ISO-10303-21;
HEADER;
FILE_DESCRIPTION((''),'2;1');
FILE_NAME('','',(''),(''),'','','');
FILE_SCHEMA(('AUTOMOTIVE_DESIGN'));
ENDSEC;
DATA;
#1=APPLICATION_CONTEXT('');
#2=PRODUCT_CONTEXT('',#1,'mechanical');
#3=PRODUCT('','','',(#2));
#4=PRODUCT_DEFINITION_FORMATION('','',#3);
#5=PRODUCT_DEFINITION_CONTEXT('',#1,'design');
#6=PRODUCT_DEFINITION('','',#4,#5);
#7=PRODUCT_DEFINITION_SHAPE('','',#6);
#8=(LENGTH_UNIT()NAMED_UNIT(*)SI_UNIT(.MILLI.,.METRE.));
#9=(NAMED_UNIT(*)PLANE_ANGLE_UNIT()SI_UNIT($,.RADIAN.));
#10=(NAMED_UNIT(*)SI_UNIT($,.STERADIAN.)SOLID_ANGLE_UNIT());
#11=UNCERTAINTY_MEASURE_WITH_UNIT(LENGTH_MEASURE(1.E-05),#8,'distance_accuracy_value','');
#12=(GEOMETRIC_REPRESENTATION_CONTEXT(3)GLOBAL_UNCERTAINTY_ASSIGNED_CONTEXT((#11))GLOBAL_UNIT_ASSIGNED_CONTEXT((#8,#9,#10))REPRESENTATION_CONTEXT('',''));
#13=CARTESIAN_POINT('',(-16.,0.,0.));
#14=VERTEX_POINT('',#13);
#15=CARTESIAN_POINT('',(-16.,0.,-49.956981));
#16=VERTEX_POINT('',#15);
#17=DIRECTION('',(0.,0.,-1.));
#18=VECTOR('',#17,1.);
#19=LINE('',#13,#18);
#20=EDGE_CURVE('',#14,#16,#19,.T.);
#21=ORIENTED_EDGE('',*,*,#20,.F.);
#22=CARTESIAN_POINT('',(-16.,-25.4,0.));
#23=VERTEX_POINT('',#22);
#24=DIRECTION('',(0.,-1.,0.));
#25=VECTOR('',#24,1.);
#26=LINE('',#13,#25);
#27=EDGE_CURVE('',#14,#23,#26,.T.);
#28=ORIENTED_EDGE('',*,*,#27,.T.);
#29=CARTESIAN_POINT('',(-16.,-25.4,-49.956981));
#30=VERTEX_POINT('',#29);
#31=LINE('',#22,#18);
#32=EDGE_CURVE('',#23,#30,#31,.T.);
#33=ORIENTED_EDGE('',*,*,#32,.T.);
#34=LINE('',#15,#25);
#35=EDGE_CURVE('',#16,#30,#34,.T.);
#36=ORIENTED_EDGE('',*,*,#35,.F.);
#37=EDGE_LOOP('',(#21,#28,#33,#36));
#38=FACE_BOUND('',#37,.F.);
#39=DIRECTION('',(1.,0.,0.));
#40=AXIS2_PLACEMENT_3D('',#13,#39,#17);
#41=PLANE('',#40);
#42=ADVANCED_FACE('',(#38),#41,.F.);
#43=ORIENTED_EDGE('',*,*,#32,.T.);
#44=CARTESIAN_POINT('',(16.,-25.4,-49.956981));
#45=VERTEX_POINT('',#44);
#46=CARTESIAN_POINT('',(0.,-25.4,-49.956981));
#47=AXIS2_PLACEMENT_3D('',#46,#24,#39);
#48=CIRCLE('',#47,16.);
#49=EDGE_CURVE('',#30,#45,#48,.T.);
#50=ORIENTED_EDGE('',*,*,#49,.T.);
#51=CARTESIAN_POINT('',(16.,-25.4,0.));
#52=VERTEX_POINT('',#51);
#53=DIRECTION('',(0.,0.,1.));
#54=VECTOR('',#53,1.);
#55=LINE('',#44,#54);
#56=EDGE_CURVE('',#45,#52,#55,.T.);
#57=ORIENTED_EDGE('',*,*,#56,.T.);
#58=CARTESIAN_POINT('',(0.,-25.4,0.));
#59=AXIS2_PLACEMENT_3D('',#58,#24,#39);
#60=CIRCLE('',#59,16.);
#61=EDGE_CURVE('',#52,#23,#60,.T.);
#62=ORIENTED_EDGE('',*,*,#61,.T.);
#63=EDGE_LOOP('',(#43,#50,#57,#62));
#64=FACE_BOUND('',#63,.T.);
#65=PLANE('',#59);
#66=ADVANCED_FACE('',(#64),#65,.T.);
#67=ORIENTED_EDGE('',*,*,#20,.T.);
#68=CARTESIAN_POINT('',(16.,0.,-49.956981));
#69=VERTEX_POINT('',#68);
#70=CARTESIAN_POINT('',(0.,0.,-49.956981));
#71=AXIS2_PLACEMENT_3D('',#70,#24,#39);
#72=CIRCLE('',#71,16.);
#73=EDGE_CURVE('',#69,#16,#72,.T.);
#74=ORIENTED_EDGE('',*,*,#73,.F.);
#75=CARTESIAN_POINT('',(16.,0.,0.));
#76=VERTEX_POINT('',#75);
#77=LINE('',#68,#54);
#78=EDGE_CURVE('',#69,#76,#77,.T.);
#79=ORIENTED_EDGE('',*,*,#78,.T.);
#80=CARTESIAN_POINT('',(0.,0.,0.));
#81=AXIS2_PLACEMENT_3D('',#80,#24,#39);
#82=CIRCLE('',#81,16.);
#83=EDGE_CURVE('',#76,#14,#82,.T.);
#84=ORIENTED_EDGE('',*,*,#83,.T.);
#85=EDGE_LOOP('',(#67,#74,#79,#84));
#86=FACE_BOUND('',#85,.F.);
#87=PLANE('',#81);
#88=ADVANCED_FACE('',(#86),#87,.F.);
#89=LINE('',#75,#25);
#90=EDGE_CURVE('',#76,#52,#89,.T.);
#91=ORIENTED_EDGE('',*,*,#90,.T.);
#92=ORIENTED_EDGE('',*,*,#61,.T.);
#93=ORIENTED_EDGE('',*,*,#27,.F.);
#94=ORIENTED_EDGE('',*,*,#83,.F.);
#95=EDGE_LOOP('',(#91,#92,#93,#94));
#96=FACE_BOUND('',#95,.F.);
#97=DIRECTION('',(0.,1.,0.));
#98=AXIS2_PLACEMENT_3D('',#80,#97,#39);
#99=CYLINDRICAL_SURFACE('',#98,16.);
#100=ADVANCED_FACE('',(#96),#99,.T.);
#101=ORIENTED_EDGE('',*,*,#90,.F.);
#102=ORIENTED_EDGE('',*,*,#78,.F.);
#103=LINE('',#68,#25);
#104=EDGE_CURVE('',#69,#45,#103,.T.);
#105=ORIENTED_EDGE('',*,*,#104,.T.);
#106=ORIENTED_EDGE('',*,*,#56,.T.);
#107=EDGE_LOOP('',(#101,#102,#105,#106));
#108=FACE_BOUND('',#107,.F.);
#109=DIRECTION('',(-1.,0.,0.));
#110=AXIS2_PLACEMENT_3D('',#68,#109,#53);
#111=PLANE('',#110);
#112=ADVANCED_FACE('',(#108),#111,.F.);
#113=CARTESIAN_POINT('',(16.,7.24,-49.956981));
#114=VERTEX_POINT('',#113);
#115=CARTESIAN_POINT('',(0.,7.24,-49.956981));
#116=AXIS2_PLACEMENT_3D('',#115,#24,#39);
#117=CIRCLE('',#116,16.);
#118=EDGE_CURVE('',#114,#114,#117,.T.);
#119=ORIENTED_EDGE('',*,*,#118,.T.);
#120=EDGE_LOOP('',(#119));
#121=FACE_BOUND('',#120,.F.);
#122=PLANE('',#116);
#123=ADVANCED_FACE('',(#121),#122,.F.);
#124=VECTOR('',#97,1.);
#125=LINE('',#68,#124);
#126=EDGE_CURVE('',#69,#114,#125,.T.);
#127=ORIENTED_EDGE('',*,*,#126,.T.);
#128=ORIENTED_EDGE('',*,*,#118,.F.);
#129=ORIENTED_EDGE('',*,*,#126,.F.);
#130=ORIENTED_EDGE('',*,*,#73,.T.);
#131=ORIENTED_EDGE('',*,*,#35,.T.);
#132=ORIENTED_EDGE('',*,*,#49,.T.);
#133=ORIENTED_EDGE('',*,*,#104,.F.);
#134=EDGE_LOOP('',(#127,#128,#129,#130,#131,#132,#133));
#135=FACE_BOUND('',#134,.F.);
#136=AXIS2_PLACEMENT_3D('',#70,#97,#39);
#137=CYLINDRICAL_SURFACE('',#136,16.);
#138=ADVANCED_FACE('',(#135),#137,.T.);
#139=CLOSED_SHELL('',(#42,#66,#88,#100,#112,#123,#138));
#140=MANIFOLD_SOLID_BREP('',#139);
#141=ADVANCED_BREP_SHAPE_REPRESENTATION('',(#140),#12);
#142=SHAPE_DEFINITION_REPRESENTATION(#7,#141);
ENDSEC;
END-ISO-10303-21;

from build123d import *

# Parameters (mm, degrees)
F1_DEPTH = 7.24
F2_DEPTH = 25.4


with BuildPart() as f1:
    # F0 (on Front) → F1 (new body)
    with BuildSketch(Plane.XZ):
        with BuildLine():
            ThreePointArc((-16, -49.9569810927), (0, -65.9569810927), (16, -49.9569810927))
            ThreePointArc((16, -49.9569810927), (0, -33.9569810927), (-16, -49.9569810927))
        make_face()
    extrude(amount=-F1_DEPTH)

    # F0 (on Front) → F2 (join)
    with BuildSketch(Plane.XZ):
        with BuildLine():
            ThreePointArc((-16, 0), (0, -16), (16, 0))
            ThreePointArc((16, 0), (0, 16), (-16, 0))
        make_face()
        with BuildLine():
            Line((16, -49.9569810927), (16, 0))
            ThreePointArc((16, 0), (0, -16), (-16, 0))
            Line((-16, 0), (-16, -49.9569810927))
            ThreePointArc((-16, -49.9569810927), (0, -33.9569810927), (16, -49.9569810927))
        make_face()
        with BuildLine():
            ThreePointArc((-16, -49.9569810927), (0, -65.9569810927), (16, -49.9569810927))
            ThreePointArc((16, -49.9569810927), (0, -33.9569810927), (-16, -49.9569810927))
        make_face()
    extrude(amount=F2_DEPTH)


solid = f1.part
